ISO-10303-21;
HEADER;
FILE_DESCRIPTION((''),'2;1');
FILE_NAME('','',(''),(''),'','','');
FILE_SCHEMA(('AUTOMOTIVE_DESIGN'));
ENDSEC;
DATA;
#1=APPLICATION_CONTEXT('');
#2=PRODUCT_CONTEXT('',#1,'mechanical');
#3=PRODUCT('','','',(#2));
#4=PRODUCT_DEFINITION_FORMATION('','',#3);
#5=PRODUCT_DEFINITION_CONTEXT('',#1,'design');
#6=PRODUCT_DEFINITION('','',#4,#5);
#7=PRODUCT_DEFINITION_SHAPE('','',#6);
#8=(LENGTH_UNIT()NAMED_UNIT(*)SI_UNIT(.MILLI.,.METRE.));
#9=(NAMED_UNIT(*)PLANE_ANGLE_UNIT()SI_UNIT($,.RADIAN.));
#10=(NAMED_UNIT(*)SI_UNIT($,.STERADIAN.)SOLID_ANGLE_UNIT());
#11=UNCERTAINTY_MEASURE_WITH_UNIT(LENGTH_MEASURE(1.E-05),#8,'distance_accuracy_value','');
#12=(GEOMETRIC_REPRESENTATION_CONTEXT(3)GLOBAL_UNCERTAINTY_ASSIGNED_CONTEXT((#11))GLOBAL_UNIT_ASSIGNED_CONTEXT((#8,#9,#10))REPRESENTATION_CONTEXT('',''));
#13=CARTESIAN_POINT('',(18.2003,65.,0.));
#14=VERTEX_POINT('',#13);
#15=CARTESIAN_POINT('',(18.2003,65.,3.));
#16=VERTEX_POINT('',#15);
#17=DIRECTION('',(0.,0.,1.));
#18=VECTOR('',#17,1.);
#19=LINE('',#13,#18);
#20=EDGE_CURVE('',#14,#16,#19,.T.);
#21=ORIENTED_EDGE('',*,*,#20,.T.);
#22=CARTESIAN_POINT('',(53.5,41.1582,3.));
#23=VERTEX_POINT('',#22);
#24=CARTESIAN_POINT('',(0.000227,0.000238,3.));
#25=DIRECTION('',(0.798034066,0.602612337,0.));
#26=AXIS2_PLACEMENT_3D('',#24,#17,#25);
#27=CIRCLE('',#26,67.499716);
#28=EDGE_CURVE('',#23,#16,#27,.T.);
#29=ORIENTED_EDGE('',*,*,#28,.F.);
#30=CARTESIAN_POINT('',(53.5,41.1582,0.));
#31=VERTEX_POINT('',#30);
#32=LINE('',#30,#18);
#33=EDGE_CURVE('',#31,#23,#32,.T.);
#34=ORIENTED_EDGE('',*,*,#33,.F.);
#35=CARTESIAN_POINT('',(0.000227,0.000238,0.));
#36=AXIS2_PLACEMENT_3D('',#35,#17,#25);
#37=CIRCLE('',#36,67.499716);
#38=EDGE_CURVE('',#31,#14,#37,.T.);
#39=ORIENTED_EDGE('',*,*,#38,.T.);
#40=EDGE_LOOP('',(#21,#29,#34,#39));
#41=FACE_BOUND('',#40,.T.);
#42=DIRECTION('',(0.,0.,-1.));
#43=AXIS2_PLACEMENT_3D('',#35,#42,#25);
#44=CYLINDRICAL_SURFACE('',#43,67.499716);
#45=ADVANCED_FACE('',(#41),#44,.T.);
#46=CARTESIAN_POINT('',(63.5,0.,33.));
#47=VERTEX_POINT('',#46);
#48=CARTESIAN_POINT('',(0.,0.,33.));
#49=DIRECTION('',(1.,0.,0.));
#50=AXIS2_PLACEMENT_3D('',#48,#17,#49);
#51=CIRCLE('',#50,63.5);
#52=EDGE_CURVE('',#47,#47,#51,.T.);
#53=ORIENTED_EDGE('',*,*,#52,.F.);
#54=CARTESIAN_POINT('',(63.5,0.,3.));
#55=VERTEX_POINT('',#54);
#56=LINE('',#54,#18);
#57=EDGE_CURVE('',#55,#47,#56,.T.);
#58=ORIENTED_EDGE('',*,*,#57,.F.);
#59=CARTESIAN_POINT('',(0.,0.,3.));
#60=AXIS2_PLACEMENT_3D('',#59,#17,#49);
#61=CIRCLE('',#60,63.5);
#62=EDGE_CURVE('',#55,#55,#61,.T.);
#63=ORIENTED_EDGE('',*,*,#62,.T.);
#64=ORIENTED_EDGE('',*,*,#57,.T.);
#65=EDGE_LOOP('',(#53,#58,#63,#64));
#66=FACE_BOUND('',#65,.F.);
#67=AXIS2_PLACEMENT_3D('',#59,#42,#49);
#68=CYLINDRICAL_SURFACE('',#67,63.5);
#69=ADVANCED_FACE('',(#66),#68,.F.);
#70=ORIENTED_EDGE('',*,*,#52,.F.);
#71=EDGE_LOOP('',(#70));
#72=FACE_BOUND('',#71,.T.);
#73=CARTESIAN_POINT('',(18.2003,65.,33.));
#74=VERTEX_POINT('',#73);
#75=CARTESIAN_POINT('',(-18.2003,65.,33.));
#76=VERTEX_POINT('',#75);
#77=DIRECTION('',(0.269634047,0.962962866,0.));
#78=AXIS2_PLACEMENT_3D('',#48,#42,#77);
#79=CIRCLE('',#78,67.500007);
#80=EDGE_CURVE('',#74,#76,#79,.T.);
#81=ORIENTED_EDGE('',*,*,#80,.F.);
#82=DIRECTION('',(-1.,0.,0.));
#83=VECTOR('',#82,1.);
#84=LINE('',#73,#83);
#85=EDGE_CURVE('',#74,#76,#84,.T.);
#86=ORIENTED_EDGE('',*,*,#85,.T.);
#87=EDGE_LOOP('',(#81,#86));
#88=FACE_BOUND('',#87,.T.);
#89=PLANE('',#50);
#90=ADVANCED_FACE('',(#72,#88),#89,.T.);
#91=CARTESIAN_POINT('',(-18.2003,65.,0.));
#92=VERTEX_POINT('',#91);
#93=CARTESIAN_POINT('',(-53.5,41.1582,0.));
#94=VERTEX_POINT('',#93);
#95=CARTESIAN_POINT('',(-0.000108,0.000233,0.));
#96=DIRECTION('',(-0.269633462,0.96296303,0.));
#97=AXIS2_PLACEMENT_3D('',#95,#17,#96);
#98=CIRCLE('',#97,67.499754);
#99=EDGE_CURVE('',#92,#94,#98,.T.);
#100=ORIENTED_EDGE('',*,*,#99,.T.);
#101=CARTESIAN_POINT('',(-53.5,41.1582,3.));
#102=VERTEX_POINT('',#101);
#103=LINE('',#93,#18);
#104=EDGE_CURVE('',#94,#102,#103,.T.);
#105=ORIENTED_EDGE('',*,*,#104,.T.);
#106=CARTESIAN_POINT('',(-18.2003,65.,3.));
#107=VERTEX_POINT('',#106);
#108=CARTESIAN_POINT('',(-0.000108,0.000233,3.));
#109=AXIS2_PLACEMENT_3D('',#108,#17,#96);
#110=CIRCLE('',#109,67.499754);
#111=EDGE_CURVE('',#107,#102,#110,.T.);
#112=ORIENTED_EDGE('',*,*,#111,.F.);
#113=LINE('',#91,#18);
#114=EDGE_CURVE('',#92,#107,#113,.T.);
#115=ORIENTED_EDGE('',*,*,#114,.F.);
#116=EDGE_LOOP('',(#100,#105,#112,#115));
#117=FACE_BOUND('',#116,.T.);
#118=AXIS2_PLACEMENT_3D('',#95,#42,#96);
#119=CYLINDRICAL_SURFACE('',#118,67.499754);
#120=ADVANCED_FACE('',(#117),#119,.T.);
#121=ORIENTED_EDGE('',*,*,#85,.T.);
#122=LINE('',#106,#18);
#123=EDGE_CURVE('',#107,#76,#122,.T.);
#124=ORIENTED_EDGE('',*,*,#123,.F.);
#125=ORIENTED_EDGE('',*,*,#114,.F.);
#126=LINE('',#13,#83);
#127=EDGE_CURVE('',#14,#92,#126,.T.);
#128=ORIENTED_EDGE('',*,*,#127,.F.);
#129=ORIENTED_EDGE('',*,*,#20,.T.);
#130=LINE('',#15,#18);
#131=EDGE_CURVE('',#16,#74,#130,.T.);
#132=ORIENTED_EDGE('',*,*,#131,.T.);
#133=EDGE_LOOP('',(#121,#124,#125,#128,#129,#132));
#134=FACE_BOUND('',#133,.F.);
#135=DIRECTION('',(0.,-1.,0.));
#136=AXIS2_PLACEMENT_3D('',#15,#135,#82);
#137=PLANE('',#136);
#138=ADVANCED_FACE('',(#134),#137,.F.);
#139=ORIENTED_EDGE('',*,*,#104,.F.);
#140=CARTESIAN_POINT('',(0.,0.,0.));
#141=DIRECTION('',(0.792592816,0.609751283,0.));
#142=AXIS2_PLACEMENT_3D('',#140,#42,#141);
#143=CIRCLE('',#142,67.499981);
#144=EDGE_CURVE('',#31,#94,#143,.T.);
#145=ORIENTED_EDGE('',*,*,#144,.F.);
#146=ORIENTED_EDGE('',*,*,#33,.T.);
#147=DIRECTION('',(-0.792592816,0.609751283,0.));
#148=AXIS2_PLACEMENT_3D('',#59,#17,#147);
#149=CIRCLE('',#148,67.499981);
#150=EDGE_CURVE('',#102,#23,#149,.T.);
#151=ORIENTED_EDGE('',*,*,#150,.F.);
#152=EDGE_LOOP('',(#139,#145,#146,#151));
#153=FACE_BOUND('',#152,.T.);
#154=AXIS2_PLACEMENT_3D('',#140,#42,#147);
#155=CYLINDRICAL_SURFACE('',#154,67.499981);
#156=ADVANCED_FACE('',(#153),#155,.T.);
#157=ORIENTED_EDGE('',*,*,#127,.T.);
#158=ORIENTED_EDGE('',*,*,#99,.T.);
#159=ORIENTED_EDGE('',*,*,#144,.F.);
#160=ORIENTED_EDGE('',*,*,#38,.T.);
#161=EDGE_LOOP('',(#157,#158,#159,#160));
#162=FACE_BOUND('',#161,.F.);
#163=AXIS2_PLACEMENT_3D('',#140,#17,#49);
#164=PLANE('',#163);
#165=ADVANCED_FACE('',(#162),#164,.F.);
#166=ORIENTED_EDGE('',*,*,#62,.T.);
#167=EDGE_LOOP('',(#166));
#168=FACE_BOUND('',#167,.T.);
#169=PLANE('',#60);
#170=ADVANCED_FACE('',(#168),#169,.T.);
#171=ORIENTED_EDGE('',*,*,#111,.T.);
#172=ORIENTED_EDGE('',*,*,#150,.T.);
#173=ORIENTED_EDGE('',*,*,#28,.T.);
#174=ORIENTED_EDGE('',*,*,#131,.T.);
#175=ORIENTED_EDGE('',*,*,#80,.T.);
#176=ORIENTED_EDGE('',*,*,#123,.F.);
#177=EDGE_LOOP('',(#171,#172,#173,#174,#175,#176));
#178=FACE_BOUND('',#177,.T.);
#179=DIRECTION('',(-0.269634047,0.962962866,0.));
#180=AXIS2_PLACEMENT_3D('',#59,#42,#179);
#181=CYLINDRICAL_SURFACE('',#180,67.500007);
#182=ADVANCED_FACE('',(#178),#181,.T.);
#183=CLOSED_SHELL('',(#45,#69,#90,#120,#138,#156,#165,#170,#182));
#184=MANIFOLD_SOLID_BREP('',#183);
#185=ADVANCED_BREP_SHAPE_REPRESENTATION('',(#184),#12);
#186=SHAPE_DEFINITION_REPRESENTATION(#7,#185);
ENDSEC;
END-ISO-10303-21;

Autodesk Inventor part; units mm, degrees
ref_plane "YZ Plane" through (0, 0, 0) normal (1, 0, 0) x (0, 1, 0)
ref_plane "XZ Plane" through (0, 0, 0) normal (0, 1, 0) x (-1, 0, 0)
ref_plane "XY Plane" through (0, 0, 0) normal (0, 0, 1) x (1, 0, 0)
sketch "Náčrt1" plane through (0, 0, 0) normal (0, 0, 1) x (1, 0, 0)
  line L0 (0, 95.014) -> (0, -94.5857) projected
  line L1 (-94.5, 0) -> (94.5, 0) projected
  circle A0 centre (0, 0) radius 63.5
  arc A1 (-53.5, 41.1582) -> (53.5, 41.1582) centre (0, 0) ccw
  line L2 (-18.2003, 65) -> (18.2003, 65)
  arc A2 (53.8673, 40.6764) -> (18.2003, 65) centre (0, 0) ccw
  arc A3 (-18.2003, 65) -> (-53.5, 41.1582) centre (0, 0) ccw
  point P0 (53.5, 41.1582)
  dimension "d0" = 127
  dimension "d1" = 135
  dimension "d2" = 107
  dimension "d8" = 65
extrude "Vysunutí1" add sketch "Náčrt1" along normal blind 3
sketch "Náčrt2" plane through (0, 0, 3) normal (0, 0, 1) x (1, 0, 0)
  circle A0 centre (0, 0) radius 63.5
  arc A1 (-18.2003, 65) -> (18.2003, 65) centre (0, 0) ccw projected
  line L0 (18.2003, 65) -> (-18.2003, 65) projected
  line L1 (-18.2003, 65) -> (18.2003, 65)
  line L2 (18.2003, 65) -> (-18.2003, 65)
  circle A2 centre (0, 0) radius 67.5
  circle A3 centre (0, 0) radius 63.5
  point P0 (53.5, 72.3723)
  point P1 (-53.5, 72.3723)
  dimension "d5" = 127
extrude "Vysunutí2" add sketch "Náčrt2" along normal blind 30 contours L0 A1
properties part number "Miska"
